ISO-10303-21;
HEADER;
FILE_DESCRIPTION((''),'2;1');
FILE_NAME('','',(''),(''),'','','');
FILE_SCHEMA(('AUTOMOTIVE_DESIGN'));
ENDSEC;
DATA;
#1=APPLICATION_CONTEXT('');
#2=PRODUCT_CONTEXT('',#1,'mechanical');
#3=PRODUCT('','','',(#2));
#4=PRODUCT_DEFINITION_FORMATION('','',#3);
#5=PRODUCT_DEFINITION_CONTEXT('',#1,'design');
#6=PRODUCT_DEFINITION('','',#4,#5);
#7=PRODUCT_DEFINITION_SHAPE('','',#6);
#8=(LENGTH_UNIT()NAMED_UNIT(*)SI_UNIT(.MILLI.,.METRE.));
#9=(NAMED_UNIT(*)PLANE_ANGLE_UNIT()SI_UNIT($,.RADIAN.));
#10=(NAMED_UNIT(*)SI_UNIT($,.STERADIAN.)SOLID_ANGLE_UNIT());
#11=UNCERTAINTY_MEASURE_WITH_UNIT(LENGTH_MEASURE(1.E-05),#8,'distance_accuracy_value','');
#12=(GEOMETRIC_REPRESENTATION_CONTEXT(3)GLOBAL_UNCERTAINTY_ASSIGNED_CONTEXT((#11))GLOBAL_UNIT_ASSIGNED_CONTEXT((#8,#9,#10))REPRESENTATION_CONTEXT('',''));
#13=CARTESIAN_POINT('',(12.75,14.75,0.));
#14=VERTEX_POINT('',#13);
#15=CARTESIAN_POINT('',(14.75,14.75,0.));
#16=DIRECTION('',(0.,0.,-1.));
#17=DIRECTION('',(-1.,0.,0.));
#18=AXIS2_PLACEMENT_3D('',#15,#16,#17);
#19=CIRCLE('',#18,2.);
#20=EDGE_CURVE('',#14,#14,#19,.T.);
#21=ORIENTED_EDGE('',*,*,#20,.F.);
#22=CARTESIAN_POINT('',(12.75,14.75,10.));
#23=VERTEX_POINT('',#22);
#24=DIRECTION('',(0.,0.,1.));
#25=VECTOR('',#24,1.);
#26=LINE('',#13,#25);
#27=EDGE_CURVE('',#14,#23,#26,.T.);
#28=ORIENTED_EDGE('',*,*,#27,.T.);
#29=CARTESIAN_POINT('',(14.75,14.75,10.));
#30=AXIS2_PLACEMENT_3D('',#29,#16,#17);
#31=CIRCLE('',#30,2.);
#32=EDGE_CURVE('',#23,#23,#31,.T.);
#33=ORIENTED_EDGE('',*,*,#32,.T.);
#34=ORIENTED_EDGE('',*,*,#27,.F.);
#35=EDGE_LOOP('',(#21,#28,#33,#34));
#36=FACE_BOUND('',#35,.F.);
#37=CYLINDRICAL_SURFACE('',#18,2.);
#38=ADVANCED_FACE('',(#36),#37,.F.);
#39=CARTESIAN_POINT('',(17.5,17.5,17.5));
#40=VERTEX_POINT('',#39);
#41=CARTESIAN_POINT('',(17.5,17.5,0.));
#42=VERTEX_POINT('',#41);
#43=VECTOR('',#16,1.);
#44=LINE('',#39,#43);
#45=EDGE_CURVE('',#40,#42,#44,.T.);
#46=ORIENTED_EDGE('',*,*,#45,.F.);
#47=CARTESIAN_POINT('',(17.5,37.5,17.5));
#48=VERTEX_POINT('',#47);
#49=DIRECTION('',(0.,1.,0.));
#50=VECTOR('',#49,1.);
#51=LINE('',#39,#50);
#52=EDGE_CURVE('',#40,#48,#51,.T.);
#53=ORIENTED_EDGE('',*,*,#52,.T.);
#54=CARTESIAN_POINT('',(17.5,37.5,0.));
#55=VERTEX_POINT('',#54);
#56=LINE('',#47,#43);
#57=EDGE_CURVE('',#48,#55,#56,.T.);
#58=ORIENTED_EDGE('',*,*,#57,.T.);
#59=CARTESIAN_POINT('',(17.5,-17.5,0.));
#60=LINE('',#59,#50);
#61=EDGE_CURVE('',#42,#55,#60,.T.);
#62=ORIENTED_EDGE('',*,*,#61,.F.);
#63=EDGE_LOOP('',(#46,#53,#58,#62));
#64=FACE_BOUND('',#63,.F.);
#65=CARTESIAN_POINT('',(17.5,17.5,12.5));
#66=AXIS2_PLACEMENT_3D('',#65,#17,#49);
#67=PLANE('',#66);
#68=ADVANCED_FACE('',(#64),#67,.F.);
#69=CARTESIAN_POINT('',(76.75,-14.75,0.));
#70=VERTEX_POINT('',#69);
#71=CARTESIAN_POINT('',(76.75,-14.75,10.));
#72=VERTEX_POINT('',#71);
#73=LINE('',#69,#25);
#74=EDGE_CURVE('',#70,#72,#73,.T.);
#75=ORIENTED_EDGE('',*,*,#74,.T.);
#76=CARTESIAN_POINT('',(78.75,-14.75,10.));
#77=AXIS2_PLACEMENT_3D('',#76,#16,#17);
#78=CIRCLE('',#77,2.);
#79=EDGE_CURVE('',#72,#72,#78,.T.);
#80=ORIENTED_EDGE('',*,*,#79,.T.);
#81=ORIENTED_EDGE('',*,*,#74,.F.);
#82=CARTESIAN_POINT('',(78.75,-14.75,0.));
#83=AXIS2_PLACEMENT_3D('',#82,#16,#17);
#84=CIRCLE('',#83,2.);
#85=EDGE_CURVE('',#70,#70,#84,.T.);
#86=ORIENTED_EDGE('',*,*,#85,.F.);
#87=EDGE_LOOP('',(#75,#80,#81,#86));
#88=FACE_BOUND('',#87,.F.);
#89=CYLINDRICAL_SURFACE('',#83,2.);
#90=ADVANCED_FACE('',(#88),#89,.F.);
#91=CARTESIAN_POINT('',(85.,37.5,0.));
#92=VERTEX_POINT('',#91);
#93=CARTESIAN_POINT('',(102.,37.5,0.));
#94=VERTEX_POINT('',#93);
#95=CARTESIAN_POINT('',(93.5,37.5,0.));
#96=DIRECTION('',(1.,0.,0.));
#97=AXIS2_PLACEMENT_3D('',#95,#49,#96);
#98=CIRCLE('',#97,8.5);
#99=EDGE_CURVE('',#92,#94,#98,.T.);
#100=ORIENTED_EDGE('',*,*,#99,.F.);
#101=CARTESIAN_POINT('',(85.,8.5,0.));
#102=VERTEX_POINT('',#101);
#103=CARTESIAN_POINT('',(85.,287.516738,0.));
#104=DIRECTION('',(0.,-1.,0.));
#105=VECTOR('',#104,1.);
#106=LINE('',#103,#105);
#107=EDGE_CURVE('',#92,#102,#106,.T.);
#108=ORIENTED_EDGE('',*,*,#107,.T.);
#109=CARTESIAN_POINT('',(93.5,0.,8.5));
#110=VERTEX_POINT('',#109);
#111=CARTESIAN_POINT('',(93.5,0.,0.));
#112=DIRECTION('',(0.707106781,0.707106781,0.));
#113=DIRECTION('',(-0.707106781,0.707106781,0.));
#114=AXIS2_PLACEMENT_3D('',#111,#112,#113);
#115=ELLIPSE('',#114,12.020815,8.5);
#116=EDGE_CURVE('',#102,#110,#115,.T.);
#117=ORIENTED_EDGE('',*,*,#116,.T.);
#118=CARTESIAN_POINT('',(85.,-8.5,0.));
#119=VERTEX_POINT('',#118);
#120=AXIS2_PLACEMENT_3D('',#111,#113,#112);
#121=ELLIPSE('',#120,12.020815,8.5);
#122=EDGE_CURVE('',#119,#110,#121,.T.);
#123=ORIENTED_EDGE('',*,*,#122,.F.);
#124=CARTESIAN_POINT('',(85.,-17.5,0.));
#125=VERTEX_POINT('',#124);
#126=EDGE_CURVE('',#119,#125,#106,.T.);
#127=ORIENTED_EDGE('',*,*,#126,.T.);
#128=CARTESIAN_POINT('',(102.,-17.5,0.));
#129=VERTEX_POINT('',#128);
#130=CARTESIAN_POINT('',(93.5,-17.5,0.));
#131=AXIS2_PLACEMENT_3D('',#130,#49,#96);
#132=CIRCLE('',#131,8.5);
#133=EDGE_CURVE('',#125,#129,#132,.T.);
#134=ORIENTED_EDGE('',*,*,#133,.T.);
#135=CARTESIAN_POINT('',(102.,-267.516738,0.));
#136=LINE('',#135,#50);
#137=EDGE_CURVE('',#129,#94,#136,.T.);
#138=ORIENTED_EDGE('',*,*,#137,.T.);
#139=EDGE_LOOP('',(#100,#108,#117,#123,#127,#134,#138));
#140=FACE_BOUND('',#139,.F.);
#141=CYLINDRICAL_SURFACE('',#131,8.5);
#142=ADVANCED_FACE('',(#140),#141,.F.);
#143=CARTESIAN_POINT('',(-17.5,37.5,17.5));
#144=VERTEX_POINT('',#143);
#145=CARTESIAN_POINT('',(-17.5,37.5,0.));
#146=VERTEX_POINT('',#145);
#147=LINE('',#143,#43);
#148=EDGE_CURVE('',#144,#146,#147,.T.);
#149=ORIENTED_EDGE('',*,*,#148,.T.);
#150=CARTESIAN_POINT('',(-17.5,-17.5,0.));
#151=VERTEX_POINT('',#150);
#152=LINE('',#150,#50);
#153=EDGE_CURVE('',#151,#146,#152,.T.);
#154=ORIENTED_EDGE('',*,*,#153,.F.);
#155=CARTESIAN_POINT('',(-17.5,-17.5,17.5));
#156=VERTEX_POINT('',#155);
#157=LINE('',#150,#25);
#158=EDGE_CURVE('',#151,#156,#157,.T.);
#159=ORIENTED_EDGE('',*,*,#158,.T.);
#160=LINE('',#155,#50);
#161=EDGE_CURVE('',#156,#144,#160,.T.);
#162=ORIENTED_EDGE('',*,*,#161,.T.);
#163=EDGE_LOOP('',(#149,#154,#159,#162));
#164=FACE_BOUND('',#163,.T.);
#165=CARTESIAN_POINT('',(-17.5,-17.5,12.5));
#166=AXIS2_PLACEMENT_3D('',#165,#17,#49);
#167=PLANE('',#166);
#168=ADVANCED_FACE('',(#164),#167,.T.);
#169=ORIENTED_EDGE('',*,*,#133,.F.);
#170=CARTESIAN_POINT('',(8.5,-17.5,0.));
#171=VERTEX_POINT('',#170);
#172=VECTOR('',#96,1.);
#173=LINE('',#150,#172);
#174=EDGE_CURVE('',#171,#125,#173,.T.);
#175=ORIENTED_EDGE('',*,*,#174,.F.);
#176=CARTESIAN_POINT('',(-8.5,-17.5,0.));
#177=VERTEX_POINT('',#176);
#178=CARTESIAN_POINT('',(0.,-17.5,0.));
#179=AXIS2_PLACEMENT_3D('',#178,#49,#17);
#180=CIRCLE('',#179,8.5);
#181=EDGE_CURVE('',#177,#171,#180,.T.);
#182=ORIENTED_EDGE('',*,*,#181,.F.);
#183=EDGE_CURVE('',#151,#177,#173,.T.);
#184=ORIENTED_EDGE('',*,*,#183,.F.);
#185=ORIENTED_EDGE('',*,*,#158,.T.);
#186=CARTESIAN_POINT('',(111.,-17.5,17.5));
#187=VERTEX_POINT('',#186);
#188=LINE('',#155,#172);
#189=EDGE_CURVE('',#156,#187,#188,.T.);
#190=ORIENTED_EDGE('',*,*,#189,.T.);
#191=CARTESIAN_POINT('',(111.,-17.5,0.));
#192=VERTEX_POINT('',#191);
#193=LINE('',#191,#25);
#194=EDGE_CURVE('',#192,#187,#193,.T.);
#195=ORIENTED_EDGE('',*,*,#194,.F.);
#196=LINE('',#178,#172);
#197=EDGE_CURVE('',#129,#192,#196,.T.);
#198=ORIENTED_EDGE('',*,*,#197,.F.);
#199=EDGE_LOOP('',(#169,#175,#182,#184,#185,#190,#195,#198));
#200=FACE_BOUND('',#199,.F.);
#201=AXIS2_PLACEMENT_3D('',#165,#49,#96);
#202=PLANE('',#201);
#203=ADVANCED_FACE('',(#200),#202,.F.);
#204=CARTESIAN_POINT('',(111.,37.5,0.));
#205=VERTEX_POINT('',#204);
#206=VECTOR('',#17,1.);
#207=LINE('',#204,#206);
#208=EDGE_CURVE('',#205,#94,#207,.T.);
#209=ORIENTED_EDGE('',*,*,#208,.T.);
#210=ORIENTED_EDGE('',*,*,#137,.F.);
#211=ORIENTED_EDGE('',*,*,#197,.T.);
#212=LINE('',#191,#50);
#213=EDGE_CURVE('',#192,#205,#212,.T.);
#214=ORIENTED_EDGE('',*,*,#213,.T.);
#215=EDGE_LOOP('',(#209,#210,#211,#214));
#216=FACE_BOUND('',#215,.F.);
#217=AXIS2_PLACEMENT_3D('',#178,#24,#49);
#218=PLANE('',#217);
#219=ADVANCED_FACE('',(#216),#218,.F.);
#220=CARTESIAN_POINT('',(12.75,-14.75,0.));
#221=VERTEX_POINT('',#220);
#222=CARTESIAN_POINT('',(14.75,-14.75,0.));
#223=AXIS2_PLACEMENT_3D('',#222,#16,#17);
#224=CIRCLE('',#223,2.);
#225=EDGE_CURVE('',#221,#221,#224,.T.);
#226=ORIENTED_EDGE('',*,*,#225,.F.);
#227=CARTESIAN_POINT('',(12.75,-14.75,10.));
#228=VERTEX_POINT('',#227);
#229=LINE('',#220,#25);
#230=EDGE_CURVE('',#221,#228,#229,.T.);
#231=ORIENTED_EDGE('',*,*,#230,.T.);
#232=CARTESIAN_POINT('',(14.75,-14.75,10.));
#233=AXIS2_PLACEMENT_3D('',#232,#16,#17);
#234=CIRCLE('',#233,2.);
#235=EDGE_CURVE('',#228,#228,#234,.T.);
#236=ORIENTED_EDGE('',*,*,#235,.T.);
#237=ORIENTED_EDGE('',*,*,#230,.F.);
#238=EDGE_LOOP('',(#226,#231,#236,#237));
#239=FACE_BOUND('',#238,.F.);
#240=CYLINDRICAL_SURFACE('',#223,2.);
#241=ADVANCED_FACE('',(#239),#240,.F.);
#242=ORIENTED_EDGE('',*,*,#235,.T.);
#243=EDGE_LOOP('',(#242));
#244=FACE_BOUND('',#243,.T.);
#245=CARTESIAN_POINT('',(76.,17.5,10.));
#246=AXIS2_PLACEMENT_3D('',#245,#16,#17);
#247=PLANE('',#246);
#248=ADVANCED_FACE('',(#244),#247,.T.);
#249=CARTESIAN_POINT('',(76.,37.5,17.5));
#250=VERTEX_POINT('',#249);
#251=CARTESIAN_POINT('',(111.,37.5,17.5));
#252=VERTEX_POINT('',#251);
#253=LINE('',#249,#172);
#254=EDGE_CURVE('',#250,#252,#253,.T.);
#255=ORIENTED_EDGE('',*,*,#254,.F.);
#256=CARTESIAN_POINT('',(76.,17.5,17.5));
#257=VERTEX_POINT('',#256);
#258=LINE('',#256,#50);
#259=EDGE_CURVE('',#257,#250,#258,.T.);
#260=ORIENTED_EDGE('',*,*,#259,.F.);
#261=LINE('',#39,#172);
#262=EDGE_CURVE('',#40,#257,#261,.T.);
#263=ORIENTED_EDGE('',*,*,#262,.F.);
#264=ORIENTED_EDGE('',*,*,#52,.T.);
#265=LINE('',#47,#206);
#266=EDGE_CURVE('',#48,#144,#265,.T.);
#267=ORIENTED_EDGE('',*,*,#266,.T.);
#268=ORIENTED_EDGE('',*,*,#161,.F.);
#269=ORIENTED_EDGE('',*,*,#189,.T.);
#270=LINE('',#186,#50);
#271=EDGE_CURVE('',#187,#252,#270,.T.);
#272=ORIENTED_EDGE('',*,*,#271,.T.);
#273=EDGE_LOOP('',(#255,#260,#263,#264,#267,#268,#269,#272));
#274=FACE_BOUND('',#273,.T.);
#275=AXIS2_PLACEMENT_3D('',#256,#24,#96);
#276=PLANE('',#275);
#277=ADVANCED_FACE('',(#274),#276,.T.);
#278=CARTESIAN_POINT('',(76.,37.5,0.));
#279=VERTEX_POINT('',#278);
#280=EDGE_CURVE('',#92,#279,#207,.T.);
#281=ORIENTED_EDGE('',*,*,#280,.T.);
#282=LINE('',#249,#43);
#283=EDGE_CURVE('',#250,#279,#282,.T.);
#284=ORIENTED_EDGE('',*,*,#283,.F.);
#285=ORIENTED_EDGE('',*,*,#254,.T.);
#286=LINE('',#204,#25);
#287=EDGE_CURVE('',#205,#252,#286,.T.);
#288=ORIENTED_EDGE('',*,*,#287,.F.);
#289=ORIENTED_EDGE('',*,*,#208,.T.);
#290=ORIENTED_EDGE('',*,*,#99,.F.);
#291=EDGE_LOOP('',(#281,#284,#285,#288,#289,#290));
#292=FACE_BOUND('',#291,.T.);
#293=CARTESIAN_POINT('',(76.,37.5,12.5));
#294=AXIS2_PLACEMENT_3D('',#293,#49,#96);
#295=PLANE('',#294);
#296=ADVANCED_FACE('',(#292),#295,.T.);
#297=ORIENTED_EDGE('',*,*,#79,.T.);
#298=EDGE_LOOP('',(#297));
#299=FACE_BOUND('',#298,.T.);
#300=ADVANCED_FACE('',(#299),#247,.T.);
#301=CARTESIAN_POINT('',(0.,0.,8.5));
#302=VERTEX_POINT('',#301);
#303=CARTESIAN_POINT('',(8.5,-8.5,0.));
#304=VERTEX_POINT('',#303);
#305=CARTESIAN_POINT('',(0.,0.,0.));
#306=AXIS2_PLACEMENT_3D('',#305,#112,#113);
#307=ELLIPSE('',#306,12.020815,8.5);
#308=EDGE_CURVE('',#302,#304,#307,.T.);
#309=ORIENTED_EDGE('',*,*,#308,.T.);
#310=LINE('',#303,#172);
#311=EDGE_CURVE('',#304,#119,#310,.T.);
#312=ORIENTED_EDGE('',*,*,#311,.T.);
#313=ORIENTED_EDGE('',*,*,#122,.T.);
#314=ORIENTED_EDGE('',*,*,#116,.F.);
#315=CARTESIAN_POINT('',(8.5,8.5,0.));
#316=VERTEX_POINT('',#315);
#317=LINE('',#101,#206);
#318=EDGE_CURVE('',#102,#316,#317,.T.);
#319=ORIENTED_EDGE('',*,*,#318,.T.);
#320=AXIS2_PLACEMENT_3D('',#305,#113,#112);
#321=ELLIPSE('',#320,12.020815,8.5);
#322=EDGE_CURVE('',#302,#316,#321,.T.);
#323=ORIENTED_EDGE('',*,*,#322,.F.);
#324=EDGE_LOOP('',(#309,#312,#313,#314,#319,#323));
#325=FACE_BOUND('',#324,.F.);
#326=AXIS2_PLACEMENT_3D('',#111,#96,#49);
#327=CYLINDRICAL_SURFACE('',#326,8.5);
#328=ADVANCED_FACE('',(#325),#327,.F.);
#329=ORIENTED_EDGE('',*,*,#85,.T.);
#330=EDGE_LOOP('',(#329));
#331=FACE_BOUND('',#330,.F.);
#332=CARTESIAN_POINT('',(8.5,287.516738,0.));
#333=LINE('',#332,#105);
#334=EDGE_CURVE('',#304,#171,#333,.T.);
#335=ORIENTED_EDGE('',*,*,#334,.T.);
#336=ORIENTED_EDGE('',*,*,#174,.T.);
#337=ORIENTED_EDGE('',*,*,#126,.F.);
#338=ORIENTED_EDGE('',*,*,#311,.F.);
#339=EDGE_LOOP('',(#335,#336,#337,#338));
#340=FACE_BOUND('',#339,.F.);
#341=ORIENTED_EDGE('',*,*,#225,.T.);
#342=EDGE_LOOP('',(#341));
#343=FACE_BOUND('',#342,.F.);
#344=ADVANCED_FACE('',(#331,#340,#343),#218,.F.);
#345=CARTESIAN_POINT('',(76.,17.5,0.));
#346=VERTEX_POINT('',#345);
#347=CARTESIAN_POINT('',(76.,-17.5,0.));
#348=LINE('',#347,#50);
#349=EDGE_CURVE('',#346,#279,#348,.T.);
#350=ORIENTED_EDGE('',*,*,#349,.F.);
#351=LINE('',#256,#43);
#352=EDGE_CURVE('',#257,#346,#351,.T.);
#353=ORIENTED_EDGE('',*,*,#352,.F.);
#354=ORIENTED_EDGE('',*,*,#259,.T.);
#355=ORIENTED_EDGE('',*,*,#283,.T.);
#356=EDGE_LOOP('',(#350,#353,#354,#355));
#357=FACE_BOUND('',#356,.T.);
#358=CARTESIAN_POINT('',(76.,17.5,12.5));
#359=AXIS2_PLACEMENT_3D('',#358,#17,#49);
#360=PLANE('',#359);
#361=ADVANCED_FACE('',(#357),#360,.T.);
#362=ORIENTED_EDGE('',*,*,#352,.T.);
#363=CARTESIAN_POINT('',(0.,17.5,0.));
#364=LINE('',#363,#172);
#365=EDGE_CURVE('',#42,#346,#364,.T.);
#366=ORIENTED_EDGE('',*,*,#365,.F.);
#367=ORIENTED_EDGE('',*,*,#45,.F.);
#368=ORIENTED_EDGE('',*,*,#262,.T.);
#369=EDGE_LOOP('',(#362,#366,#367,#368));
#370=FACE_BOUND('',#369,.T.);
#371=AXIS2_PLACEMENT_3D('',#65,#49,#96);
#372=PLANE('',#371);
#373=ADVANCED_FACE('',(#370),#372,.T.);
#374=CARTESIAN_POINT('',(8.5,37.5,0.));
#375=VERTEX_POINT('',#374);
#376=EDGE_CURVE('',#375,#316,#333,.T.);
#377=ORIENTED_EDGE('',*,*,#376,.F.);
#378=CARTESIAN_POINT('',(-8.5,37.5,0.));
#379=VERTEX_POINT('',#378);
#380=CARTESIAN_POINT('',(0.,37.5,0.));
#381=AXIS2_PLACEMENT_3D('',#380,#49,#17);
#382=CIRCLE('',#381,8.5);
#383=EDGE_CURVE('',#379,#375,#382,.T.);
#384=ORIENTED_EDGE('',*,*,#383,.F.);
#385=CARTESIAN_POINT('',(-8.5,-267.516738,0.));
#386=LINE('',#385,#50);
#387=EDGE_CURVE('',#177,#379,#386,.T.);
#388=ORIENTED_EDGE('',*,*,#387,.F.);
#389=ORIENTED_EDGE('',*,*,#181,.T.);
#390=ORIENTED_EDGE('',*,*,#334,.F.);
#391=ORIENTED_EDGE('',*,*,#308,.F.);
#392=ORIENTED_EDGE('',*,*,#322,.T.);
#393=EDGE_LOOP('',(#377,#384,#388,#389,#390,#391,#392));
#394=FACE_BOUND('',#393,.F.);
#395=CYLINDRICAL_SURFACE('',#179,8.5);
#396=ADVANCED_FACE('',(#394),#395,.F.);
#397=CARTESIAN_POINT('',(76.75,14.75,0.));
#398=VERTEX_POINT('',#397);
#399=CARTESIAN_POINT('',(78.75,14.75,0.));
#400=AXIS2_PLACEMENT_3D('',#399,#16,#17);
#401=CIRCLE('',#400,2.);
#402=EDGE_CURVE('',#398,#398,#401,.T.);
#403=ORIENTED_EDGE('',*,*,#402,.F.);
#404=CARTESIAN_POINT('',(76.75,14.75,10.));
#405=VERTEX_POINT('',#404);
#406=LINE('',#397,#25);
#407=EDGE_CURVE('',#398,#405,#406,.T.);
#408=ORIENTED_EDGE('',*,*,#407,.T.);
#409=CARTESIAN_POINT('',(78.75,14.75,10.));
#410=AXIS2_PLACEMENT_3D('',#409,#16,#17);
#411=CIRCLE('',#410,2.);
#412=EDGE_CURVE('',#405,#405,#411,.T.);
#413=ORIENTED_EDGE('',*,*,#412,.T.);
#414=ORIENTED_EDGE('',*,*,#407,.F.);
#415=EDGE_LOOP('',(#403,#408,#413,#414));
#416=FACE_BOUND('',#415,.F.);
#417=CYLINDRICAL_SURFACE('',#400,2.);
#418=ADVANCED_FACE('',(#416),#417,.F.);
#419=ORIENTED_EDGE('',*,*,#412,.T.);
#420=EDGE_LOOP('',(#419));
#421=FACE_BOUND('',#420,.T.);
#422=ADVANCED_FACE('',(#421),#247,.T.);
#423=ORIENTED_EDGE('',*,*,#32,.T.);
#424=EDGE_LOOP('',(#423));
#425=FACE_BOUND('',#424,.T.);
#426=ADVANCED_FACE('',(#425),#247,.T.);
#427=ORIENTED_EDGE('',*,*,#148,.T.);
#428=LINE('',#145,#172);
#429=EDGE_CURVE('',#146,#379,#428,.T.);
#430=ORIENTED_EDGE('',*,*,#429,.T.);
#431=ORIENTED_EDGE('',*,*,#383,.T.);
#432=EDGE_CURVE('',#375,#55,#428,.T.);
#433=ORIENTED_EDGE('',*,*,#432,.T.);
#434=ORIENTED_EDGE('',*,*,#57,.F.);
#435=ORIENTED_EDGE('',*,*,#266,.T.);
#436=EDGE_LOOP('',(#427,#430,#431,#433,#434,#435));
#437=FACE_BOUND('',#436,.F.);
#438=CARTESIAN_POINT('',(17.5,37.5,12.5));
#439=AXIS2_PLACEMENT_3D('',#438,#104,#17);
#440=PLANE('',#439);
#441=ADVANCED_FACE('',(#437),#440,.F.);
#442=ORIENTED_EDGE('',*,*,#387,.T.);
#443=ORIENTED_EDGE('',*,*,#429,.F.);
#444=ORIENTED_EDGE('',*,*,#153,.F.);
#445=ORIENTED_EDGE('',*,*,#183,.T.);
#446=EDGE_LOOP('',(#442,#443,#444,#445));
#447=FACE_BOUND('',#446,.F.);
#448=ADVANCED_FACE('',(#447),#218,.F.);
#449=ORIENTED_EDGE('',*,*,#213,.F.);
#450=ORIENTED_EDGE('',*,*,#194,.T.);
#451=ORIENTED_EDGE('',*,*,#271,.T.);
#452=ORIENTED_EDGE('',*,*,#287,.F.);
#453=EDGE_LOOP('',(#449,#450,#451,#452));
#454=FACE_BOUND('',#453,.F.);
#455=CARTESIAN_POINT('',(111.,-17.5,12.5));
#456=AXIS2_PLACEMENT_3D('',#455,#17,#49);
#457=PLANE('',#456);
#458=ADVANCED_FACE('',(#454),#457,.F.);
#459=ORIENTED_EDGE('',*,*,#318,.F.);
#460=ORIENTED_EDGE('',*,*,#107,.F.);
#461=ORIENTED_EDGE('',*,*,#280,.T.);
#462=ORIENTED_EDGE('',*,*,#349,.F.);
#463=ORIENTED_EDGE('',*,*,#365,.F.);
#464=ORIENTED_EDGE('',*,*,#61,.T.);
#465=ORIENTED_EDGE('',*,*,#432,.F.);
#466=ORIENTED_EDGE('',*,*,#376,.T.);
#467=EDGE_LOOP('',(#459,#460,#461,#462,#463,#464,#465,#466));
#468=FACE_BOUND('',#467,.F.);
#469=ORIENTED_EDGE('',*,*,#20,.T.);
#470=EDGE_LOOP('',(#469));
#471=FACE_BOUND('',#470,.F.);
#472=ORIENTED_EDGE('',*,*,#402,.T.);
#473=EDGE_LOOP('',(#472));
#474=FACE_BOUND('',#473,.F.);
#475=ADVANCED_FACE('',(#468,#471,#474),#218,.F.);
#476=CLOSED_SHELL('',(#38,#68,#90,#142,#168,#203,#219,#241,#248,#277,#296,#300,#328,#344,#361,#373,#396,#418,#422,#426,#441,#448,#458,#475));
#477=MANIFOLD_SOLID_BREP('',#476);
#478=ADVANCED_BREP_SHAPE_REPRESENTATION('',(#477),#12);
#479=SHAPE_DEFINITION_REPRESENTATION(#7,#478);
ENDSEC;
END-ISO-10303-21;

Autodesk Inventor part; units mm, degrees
ref_plane "YZ Plane" through (0, 0, 0) normal (1, 0, 0) x (0, 1, 0)
ref_plane "XZ Plane" through (0, 0, 0) normal (0, 1, 0) x (-1, 0, 0)
ref_plane "XY Plane" through (0, 0, 0) normal (0, 0, 1) x (1, 0, 0)
sketch "Sketch1" plane through (0, 0, 0) normal (0, 0, 1) x (1, 0, 0)
  line L0 (0, 0) -> (93.5, 0)
  line L1 (93.5, 0) -> (93.5, 150)
  line L2 (93.5, 150) -> (0, 150)
  line L3 (0, 150) -> (0, 0)
  dimension "d0" = 93.5
  dimension "d1" = 150
sketch "Sketch2" plane through (0, 0, 0) normal (1, 0, 0) x (0, 1, 0)
  circle A0 centre (0, 0) radius 12.5
  circle A1 centre (0, 0) radius 8.5
  line L0 (-12.5, 0) -> (12.5, 0)
  line L1 (12.5, 0) -> (12.5, 12.5)
  line L2 (12.5, 12.5) -> (-12.5, 12.5)
  line L3 (-12.5, 12.5) -> (-12.5, 0)
  circle A2 centre (150, 0) radius 12.5
  circle A3 centre (150, 0) radius 8.5
  line L4 (137.5, 0) -> (162.5, 0)
  line L5 (162.5, 0) -> (162.5, 12.5)
  line L6 (162.5, 12.5) -> (137.5, 12.5)
  line L7 (137.5, 12.5) -> (137.5, 0)
  line L8 (-12.5, 12.5) -> (-17.5, 12.5)
  line L9 (-17.5, 12.5) -> (-17.5, 0)
  line L10 (-17.5, 0) -> (-12.5, 0)
  line L11 (-12.5, 0) -> (-12.5, 12.5)
  line L12 (12.5, 12.5) -> (17.5, 12.5)
  line L13 (17.5, 12.5) -> (17.5, 0)
  line L14 (17.5, 0) -> (12.5, 0)
  line L15 (12.5, 0) -> (12.5, 12.5)
  point P0 (8.5, 0)
  point P1 (-8.5, 0)
  point P2 (150, 0)
  point P3 (12.5, 0)
  dimension "d2" = 25
  dimension "d3" = 17
  dimension "d6" = 5
  dimension "d7" = 5
  dimension "d8" = 35
extrude "Extrusion1" add sketch "Sketch2" along normal up to surface (93.5 mm away) contours L3 L2 A0 | A0 L0 A1 | L10 L9 L8 L3 | A0 L2 L1 | L1 L12 L13 L14 | A1 L0 picked at (11.0622, 0.9272) picked at (2.1208, 1.8788)
ref_plane "Work Plane1" through (46.75, 0, 0) normal (-1, 0, 0) x (0, 0, 1)
sketch "Sketch3" plane through (0, -17.5, 0) normal (0, -1, 0) x (1, 0, 0)
  line L0 (0, 12.5) -> (93.5, 12.5) projected
  line L1 (76, 12.5) -> (111, 12.5)
  line L2 (111, 12.5) -> (111, 0)
  line L3 (111, 0) -> (76, 0)
  line L4 (76, 0) -> (76, 12.5)
  line L5 (93.5, 12.5) -> (93.5, 0) projected
  circle A0 centre (93.5, 0) radius 8.5
  point P0 (0, 0)
  point P1 (93.5, 12.5)
  point P2 (102, 0)
  point P3 (85, 0)
  dimension "d9" = 35
  dimension "d33" = 17
extrude "Extrusion2" add sketch "Sketch3" against normal blind 55 contours L0 L5 A0 L3 L4 | L1 L2 L3 A0 L5 | A0 L3 L5 | L5 L3 A0
extrude "Extrusion4" cut sketch "Sketch3" along normal through all both and the other way through all contours A0 L3 L5 | L5 L3 A0
extrude "Extrusion3" cut sketch "Sketch2" along normal up to surface (93.5 mm away) contours A1 L0 picked at (2.1208, 1.8788)
mirror "Mirror1" about plane through (46.75, 0, 0) normal (-1, 0, 0) of "Extrusion2", "Extrusion4", "Extrusion3"
sketch "Sketch4" plane through (76, 17.5, 12.5) normal (0, 0, 1) x (1, 0, 0)
  line L0 (-93.5, -35) -> (35, -35) projected
  line L1 (0, 20) -> (35, 20) projected
  line L2 (0, 0) -> (0, 20) projected
  line L3 (-58.5, 0) -> (0, 0) projected
  line L4 (-58.5, 0) -> (-58.5, 20) projected
  line L5 (-58.5, 20) -> (-93.5, 20) projected
  line L6 (35, -35) -> (35, 20) projected
  line L7 (-93.5, -35) -> (-93.5, 20) projected
  point P0 (-76, -17.5)
extrude "Extrusion5" add sketch "Sketch4" along normal blind 5
sketch "Sketch5" plane through (76, 17.5, 0) normal (0, 0, -1) x (-1, 0, 0)
  circle A0 centre (-2.75, -2.75) radius 2
  line L0 (-9, -9) -> (67.5, -9) projected
  line L1 (-9, 20) -> (-9, -9) projected
  circle A1 centre (61.25, -2.75) radius 2
  circle A2 centre (-2.75, -32.25) radius 2
  circle A3 centre (61.25, -32.25) radius 2
  line L2 (67.5, -35) -> (67.5, -26) projected
  line L3 (67.5, -26) -> (-9, -26) projected
  point P0 (76, -17.5)
  dimension "d18" = 4
  dimension "d19" = 6.25
  dimension "d20" = 6.25
  dimension "d23" = 64
  dimension "d26" = 29.5
  dimension "d29" = 6.25
  dimension "d30" = 6.25
extrude "Extrusion6" cut sketch "Sketch5" against normal blind 10
equation "\"d7\" = d6"
equation "\"d9\" = d8"
equation "\"d33\" = d3"
properties part number "ElectronicsHalf"
